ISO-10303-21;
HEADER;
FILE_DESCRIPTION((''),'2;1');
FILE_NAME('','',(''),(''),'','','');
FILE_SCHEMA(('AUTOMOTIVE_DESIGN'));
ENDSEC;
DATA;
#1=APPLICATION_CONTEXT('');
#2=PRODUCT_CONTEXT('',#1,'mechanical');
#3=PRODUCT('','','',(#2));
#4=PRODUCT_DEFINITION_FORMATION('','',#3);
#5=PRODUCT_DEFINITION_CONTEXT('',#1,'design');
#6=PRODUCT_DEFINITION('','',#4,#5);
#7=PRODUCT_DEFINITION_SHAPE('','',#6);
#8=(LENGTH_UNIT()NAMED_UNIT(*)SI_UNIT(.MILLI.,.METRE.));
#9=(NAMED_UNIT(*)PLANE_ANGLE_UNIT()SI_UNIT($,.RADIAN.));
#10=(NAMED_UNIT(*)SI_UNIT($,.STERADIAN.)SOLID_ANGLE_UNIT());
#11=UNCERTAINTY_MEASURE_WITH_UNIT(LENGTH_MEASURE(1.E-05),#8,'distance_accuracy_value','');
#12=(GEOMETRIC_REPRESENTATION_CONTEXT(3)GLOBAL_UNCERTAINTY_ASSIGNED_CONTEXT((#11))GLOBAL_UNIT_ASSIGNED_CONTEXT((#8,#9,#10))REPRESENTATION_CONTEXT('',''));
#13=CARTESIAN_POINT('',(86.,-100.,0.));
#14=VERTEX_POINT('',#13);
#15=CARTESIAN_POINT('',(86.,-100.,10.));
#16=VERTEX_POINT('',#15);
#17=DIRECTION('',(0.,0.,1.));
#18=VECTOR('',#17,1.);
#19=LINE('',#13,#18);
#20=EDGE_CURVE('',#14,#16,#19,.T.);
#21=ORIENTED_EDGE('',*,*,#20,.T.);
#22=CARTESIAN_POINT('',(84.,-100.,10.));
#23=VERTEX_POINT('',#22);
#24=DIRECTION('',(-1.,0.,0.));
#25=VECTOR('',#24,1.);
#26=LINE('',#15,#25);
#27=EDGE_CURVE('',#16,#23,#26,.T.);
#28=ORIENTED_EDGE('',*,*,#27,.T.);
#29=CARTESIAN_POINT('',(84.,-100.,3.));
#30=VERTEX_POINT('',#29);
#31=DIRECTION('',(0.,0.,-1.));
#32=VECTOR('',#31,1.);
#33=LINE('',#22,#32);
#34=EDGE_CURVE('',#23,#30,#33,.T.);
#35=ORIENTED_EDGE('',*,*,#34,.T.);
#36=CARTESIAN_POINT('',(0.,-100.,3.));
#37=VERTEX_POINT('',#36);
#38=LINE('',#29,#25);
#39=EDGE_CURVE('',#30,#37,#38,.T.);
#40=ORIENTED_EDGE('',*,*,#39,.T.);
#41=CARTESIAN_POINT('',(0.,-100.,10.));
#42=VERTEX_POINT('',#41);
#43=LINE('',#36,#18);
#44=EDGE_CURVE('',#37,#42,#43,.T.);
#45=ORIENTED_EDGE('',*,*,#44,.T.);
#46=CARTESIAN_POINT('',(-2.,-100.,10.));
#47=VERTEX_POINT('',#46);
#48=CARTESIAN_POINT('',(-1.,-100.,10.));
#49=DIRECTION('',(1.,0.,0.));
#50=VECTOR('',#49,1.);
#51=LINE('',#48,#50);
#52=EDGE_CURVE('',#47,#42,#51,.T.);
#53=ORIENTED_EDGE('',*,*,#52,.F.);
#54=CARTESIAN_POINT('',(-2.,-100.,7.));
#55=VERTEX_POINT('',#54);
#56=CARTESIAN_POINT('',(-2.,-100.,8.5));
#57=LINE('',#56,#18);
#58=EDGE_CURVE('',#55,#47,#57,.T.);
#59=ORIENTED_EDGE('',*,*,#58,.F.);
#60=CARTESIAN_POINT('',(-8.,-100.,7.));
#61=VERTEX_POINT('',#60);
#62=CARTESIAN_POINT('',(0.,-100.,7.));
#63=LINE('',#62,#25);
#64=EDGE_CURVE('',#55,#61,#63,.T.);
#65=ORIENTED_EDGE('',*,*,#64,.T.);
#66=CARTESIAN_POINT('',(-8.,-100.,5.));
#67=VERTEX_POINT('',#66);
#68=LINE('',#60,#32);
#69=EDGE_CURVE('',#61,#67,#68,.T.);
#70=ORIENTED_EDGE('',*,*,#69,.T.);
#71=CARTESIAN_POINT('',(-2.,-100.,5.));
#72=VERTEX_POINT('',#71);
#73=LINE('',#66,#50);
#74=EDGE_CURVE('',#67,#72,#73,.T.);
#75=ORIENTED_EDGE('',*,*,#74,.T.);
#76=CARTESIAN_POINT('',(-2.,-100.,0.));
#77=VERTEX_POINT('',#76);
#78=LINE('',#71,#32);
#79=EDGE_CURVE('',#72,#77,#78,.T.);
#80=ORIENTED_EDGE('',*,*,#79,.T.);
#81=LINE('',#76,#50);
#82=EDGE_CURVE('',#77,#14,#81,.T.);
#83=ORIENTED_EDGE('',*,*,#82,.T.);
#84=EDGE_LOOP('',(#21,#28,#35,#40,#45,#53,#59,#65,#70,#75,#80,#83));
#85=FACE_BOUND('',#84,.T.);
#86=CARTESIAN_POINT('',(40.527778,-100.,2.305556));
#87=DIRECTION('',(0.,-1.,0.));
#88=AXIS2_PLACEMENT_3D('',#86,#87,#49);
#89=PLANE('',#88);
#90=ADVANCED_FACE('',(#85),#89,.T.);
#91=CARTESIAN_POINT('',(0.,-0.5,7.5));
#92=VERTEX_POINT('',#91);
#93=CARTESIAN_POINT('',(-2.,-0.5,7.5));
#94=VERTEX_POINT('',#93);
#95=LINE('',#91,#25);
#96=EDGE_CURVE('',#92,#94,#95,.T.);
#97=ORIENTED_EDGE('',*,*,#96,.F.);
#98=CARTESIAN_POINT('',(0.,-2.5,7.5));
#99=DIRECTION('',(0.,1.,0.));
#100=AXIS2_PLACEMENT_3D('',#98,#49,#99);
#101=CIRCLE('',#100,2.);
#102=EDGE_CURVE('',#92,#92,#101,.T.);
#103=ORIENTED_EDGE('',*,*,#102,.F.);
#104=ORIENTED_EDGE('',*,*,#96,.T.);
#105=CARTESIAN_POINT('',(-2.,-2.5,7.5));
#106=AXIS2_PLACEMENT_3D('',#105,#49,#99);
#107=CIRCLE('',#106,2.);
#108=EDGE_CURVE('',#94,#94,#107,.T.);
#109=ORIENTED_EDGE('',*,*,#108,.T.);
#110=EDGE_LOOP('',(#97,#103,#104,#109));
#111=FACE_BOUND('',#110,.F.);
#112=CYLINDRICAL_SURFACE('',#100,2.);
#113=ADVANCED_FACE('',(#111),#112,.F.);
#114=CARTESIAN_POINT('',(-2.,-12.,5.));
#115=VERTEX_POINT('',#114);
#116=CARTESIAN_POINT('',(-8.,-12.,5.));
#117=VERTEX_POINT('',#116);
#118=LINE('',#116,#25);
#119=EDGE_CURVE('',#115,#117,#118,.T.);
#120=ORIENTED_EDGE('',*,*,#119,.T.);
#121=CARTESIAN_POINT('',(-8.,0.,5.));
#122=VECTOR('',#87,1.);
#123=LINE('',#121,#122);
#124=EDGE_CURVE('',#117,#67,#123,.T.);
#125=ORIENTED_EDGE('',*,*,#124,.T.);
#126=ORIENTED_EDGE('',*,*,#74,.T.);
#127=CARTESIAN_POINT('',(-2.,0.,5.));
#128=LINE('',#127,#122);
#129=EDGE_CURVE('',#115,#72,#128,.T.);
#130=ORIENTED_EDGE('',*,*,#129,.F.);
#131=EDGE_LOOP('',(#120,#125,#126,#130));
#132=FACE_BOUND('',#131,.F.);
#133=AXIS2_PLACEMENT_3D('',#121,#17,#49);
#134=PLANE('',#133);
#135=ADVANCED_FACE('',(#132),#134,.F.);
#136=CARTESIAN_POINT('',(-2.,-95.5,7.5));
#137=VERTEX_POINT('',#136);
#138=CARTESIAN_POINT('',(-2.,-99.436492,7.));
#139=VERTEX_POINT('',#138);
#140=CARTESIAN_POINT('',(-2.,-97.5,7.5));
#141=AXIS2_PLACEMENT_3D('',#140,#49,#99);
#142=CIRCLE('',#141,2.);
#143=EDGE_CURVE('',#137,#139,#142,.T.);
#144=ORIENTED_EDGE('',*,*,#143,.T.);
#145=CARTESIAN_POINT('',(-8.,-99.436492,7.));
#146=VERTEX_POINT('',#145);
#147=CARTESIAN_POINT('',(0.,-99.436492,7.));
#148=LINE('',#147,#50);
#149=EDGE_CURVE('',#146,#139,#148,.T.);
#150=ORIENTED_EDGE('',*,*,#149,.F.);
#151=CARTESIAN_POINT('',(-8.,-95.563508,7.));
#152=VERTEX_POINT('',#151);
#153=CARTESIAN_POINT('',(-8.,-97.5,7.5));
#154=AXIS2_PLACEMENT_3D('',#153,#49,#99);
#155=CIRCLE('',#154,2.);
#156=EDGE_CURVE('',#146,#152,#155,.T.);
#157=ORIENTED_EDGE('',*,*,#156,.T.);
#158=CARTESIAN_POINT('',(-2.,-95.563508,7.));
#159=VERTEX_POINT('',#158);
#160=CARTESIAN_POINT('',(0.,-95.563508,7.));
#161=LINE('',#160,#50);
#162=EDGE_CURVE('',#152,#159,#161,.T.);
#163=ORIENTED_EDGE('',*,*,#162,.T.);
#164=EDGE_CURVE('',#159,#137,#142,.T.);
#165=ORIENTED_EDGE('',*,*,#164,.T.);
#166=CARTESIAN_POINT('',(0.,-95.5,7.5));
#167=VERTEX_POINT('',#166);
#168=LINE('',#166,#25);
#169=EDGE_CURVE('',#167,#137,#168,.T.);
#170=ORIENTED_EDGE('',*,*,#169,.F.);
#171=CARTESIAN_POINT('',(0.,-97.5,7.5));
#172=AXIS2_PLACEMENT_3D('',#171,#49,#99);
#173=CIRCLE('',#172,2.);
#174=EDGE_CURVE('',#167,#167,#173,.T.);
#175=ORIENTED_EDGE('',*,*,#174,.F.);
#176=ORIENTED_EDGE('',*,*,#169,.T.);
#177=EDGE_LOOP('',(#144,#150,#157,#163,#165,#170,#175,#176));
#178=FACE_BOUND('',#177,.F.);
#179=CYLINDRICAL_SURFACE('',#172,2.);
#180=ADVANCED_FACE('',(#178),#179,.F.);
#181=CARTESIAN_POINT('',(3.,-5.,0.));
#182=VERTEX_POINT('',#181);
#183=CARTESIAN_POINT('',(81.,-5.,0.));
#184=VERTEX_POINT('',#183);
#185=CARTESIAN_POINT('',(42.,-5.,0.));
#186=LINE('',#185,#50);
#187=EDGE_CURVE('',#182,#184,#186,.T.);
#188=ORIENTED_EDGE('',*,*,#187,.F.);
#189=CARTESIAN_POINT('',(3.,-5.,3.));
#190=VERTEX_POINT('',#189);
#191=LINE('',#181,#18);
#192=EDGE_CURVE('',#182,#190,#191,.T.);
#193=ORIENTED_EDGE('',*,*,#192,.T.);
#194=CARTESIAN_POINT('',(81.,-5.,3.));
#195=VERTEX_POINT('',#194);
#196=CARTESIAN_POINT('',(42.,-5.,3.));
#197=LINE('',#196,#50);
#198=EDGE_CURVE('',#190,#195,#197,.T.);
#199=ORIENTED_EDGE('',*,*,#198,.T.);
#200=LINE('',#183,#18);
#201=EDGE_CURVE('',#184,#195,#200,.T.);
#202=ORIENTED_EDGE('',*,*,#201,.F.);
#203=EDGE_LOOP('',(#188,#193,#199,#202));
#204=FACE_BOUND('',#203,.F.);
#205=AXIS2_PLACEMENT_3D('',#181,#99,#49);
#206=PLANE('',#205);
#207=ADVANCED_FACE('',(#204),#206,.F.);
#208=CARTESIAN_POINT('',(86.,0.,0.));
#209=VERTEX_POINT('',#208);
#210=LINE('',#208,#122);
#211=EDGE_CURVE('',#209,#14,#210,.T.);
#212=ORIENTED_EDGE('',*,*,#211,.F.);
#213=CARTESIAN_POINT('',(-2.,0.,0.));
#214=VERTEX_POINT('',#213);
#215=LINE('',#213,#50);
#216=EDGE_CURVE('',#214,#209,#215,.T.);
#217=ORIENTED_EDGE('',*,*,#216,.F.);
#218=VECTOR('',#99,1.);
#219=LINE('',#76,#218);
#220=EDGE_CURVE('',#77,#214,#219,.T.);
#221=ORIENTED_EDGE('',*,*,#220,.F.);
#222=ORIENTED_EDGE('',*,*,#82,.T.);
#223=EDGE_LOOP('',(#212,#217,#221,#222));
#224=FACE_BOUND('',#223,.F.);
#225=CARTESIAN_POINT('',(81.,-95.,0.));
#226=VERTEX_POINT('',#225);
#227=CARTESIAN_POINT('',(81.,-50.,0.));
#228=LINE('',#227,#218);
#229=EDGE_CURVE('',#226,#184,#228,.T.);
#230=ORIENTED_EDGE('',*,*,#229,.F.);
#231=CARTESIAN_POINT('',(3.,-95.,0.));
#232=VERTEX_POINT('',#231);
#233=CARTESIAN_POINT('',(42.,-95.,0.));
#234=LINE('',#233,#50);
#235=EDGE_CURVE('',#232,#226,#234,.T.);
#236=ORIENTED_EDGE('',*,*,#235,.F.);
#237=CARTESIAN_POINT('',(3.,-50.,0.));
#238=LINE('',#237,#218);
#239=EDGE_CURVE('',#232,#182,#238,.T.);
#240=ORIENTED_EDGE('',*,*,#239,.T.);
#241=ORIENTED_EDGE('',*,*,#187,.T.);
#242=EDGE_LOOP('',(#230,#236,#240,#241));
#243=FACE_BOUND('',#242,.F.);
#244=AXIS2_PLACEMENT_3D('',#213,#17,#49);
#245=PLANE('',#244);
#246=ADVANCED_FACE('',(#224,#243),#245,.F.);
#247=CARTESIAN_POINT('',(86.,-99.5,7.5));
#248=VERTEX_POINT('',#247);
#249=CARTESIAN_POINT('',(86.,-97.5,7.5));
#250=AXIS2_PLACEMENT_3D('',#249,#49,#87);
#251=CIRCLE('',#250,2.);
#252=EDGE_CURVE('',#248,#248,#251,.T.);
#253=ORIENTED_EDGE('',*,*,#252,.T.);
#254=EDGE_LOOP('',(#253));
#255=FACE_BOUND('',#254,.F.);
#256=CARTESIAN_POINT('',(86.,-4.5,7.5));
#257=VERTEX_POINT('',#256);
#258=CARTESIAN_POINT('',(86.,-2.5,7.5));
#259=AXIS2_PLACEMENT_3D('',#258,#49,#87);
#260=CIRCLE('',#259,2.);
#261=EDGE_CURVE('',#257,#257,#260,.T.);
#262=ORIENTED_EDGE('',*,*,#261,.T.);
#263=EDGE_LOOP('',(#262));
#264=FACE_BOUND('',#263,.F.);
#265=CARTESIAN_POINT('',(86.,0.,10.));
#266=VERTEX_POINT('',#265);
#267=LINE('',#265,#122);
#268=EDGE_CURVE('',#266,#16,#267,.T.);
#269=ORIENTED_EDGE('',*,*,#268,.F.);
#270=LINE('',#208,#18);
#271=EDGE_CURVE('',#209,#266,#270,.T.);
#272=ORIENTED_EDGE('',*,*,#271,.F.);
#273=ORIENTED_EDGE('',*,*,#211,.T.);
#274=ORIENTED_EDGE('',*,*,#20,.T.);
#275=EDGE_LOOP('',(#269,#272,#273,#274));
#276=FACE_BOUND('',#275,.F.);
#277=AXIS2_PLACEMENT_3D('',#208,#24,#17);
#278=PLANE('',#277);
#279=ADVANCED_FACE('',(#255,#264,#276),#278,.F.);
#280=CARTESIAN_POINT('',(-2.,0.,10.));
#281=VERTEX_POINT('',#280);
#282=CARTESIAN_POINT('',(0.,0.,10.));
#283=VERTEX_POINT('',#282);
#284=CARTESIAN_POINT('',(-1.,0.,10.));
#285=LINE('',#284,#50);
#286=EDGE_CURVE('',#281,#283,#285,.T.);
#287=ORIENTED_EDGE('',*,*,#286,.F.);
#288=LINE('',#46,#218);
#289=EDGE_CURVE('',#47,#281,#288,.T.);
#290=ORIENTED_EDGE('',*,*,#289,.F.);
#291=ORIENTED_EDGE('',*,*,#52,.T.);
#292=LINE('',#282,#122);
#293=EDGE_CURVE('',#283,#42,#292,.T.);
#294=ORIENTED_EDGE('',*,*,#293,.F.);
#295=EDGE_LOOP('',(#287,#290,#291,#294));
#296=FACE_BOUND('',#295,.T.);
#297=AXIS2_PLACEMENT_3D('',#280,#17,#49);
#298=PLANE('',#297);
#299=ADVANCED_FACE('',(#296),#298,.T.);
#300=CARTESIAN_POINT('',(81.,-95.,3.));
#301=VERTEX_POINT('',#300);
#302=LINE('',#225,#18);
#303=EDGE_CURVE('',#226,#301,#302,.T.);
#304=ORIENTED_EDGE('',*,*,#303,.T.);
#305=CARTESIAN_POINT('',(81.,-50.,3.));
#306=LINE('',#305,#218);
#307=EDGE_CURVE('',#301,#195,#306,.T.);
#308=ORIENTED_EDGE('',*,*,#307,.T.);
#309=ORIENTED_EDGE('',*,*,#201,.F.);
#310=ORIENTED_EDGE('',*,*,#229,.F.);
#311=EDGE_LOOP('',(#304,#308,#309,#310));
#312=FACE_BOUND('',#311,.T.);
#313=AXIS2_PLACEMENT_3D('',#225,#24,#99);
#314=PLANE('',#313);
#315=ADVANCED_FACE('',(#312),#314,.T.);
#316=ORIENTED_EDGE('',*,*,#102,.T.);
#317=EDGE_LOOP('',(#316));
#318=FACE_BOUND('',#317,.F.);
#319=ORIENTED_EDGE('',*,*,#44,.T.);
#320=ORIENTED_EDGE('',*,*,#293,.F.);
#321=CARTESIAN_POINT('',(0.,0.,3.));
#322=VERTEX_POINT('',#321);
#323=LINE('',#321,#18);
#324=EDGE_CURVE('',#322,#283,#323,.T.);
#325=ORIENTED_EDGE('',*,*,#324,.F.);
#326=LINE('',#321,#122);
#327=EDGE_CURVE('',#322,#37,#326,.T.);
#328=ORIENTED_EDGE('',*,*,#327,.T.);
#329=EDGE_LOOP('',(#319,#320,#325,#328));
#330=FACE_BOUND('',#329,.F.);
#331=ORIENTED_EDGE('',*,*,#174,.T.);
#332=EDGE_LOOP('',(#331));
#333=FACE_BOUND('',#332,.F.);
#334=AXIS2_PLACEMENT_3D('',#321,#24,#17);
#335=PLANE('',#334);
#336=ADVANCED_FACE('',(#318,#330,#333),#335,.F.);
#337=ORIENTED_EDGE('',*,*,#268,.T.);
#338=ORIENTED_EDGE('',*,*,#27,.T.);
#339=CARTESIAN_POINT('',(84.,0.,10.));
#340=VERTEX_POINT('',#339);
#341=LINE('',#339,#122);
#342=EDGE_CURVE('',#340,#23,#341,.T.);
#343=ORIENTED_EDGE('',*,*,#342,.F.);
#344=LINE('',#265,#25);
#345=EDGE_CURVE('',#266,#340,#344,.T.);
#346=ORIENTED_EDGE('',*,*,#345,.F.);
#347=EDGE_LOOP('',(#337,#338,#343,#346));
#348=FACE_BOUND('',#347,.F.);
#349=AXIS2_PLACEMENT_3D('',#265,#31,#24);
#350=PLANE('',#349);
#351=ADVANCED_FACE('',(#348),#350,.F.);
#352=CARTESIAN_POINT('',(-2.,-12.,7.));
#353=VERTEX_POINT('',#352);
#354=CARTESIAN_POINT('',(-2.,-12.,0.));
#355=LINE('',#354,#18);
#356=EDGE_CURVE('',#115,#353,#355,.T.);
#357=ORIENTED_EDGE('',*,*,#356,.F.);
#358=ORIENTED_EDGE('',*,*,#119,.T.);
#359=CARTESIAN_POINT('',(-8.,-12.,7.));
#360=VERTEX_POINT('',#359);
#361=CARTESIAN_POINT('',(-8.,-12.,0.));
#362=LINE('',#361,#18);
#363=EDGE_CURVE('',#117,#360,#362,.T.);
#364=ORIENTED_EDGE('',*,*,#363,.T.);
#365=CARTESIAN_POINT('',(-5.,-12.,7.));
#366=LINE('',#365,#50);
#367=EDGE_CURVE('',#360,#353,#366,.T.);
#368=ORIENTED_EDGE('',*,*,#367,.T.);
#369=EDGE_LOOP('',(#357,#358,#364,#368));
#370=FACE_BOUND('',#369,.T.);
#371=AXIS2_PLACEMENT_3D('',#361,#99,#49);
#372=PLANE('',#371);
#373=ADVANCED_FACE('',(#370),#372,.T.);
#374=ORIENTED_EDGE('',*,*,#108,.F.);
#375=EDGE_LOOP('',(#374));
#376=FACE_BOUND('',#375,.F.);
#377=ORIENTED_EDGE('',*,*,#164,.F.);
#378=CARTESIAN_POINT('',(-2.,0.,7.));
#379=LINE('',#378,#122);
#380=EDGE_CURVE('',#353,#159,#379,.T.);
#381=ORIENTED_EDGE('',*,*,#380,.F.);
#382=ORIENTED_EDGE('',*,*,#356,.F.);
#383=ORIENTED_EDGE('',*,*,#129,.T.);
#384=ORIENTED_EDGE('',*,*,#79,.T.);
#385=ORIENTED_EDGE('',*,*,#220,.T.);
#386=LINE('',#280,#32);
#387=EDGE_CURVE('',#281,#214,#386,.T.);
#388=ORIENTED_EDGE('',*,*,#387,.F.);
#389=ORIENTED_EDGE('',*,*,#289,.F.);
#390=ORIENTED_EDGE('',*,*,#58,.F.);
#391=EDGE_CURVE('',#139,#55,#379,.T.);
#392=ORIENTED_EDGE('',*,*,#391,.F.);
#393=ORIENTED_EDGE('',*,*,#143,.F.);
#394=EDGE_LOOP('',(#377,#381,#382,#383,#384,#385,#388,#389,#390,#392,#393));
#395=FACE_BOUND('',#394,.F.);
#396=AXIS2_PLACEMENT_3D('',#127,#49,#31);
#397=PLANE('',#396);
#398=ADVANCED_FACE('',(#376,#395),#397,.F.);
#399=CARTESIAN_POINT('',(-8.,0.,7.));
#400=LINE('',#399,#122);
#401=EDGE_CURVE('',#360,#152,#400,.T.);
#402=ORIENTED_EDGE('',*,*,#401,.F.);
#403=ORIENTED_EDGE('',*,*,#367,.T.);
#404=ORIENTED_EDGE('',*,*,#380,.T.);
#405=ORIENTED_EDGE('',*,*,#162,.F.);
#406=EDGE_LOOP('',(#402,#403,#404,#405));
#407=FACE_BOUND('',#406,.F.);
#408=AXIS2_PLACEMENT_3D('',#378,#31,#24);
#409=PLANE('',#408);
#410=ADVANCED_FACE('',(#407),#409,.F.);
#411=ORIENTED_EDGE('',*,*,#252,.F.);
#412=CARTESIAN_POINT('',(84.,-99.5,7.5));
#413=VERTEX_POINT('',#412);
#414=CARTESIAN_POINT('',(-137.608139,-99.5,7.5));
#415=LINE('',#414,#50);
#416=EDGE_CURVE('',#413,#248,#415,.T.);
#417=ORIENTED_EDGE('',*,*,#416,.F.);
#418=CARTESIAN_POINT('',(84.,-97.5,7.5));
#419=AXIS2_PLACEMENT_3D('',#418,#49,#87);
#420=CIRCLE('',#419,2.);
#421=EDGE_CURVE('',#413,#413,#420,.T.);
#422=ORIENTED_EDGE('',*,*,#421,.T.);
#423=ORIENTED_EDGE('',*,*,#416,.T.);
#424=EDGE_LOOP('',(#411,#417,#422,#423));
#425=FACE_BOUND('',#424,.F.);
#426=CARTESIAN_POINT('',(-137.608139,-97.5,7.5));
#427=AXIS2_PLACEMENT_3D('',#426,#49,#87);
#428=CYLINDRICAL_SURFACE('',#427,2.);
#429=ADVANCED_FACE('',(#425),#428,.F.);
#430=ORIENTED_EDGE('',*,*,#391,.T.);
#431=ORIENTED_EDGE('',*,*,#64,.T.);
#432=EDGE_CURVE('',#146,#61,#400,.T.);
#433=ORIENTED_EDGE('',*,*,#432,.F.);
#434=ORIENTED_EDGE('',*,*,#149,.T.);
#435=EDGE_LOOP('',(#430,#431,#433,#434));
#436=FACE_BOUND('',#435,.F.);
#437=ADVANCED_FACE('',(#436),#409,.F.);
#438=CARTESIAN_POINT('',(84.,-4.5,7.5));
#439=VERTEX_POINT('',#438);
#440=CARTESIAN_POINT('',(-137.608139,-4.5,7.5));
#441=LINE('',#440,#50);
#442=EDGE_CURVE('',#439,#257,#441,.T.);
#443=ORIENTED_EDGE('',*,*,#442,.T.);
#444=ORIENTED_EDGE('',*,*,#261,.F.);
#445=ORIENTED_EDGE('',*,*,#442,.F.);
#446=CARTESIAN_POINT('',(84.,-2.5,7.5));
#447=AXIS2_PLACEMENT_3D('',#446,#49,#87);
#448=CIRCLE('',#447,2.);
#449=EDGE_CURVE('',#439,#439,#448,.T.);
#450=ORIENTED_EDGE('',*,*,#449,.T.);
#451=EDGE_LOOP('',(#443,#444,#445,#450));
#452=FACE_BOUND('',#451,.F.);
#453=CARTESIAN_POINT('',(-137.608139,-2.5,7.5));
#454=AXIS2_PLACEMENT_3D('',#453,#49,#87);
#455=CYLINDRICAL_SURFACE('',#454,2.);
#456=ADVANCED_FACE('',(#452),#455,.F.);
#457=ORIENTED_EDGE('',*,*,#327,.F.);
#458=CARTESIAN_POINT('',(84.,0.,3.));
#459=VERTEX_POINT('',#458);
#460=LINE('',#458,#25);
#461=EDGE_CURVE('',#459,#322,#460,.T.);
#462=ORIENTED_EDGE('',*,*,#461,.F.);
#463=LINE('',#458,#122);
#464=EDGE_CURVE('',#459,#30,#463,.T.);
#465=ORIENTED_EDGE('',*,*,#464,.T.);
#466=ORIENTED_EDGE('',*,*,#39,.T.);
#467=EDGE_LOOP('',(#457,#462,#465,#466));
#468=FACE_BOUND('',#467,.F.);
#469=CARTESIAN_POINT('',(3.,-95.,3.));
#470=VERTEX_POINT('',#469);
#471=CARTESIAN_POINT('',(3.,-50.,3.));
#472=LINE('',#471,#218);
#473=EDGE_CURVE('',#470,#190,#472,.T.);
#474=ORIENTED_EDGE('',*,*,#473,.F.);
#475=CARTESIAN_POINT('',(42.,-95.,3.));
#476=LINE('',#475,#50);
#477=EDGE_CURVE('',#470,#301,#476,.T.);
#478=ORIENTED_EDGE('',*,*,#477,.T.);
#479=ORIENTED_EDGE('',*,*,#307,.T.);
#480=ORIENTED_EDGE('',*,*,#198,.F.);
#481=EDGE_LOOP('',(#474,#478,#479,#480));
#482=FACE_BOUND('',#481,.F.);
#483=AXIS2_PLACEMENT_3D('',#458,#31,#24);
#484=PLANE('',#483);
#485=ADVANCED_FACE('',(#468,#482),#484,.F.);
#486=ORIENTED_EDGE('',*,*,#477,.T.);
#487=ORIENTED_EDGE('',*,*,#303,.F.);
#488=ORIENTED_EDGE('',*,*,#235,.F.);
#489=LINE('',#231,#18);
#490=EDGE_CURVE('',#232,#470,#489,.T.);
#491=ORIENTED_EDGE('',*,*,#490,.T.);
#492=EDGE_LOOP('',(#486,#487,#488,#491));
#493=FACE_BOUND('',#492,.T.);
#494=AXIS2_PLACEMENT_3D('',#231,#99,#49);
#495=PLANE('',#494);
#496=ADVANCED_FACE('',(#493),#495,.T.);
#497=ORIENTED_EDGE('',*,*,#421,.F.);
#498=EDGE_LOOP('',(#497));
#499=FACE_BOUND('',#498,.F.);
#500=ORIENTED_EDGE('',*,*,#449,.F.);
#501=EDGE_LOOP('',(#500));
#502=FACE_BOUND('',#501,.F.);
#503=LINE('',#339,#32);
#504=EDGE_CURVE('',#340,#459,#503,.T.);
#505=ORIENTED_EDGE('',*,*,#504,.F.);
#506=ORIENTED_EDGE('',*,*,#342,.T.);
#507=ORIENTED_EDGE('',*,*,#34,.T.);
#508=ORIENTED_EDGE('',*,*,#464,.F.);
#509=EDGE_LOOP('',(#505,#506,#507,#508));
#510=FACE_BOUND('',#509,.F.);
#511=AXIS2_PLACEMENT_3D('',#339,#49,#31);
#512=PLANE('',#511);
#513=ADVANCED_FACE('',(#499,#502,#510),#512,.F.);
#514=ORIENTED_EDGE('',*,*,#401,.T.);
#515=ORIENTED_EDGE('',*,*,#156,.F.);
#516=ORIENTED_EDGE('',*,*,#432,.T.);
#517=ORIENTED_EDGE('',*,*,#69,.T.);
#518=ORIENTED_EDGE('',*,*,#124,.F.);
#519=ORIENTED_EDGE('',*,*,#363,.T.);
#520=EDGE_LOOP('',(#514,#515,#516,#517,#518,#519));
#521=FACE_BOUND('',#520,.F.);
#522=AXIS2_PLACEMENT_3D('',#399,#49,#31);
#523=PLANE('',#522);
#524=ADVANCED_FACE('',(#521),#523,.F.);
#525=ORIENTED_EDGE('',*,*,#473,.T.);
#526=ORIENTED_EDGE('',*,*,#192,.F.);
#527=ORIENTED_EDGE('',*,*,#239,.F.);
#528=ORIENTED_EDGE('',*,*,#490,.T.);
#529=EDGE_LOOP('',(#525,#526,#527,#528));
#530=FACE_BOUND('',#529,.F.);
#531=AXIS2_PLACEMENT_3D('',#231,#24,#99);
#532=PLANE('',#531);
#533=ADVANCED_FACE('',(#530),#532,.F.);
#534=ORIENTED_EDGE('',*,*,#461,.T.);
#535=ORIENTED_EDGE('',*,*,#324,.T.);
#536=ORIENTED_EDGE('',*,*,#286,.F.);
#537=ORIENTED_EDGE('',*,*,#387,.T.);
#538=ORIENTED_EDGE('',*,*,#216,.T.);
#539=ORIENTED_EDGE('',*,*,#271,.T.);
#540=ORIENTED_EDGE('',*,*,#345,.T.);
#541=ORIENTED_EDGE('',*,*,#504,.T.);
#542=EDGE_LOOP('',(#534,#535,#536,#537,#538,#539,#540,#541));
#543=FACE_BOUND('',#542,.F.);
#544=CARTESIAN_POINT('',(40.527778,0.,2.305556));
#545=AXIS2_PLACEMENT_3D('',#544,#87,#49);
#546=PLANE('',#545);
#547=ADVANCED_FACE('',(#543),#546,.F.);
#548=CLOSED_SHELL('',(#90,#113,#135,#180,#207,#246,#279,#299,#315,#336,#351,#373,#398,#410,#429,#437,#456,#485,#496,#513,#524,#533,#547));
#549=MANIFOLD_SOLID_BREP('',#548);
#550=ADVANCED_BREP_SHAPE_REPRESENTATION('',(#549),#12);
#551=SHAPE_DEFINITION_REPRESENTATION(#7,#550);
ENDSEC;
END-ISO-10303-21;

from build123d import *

# Parameters (mm, degrees)
F0_W      = 2
F0_H      = 3
F1_DEPTH  = 100
F2_W      = 78
F2_H      = 90
F1_FACE_W = 6
F1_FACE_H = 100
F3_DEPTH  = 3
F4_W      = 6
F4_H      = 12
F5_DEPTH  = 10
F7_D      = 4
F7_DEPTH  = 8.001
F9_D      = 4


# Not quite as in the source:
# - a feature names something its author has since deleted; it is built from what else it names


with BuildPart() as f1:
    # F0 (on Front) → F1 (new body)
    with BuildSketch(Plane.XZ):
        Polygon((-2, 0), (0, 0), (86, 0), (86, 10), (84, 10), (84, 3), (0, 3), (0, 7), (-2, 7), (-8, 7), (-8, 5), (-2, 5), align=None)
        with Locations((-1, 8.5)):
            Rectangle(F0_W, F0_H)
    extrude(amount=F1_DEPTH)

    # F2 (on Top) + F1_face (on face) → F3 (cut)
    with BuildSketch(Plane.XY):
        with Locations((42, -50)):
            Rectangle(F2_W, F2_H)
    with BuildSketch(Plane(origin=(-5, -50, 7), x_dir=(1, 0, 0), z_dir=(0, 0, 1))):
        Rectangle(F1_FACE_W, F1_FACE_H)
    extrude(amount=F3_DEPTH, mode=Mode.SUBTRACT)

    # F4 (on Top) → F5 (cut)
    with BuildSketch(Plane.XY):
        with Locations((-5, -6)):
            Rectangle(F4_W, F4_H)
    extrude(amount=F5_DEPTH, mode=Mode.SUBTRACT)

    # F7 (through all, one way)
    with BuildSketch(Plane.YZ):
        with Locations((-2.5, 7.5), (-97.5, 7.5)):
            Circle(F7_D / 2)
    extrude(amount=-F7_DEPTH, mode=Mode.SUBTRACT)

    # F9 (through all)
    with Locations(Plane(origin=(0, 0, 0), x_dir=(0, 1, 0), z_dir=(-1, 0, 0))):
        with Locations((-2.5, -7.5), (-97.5, -7.5)):
            Hole(F9_D / 2)


solid = f1.part
